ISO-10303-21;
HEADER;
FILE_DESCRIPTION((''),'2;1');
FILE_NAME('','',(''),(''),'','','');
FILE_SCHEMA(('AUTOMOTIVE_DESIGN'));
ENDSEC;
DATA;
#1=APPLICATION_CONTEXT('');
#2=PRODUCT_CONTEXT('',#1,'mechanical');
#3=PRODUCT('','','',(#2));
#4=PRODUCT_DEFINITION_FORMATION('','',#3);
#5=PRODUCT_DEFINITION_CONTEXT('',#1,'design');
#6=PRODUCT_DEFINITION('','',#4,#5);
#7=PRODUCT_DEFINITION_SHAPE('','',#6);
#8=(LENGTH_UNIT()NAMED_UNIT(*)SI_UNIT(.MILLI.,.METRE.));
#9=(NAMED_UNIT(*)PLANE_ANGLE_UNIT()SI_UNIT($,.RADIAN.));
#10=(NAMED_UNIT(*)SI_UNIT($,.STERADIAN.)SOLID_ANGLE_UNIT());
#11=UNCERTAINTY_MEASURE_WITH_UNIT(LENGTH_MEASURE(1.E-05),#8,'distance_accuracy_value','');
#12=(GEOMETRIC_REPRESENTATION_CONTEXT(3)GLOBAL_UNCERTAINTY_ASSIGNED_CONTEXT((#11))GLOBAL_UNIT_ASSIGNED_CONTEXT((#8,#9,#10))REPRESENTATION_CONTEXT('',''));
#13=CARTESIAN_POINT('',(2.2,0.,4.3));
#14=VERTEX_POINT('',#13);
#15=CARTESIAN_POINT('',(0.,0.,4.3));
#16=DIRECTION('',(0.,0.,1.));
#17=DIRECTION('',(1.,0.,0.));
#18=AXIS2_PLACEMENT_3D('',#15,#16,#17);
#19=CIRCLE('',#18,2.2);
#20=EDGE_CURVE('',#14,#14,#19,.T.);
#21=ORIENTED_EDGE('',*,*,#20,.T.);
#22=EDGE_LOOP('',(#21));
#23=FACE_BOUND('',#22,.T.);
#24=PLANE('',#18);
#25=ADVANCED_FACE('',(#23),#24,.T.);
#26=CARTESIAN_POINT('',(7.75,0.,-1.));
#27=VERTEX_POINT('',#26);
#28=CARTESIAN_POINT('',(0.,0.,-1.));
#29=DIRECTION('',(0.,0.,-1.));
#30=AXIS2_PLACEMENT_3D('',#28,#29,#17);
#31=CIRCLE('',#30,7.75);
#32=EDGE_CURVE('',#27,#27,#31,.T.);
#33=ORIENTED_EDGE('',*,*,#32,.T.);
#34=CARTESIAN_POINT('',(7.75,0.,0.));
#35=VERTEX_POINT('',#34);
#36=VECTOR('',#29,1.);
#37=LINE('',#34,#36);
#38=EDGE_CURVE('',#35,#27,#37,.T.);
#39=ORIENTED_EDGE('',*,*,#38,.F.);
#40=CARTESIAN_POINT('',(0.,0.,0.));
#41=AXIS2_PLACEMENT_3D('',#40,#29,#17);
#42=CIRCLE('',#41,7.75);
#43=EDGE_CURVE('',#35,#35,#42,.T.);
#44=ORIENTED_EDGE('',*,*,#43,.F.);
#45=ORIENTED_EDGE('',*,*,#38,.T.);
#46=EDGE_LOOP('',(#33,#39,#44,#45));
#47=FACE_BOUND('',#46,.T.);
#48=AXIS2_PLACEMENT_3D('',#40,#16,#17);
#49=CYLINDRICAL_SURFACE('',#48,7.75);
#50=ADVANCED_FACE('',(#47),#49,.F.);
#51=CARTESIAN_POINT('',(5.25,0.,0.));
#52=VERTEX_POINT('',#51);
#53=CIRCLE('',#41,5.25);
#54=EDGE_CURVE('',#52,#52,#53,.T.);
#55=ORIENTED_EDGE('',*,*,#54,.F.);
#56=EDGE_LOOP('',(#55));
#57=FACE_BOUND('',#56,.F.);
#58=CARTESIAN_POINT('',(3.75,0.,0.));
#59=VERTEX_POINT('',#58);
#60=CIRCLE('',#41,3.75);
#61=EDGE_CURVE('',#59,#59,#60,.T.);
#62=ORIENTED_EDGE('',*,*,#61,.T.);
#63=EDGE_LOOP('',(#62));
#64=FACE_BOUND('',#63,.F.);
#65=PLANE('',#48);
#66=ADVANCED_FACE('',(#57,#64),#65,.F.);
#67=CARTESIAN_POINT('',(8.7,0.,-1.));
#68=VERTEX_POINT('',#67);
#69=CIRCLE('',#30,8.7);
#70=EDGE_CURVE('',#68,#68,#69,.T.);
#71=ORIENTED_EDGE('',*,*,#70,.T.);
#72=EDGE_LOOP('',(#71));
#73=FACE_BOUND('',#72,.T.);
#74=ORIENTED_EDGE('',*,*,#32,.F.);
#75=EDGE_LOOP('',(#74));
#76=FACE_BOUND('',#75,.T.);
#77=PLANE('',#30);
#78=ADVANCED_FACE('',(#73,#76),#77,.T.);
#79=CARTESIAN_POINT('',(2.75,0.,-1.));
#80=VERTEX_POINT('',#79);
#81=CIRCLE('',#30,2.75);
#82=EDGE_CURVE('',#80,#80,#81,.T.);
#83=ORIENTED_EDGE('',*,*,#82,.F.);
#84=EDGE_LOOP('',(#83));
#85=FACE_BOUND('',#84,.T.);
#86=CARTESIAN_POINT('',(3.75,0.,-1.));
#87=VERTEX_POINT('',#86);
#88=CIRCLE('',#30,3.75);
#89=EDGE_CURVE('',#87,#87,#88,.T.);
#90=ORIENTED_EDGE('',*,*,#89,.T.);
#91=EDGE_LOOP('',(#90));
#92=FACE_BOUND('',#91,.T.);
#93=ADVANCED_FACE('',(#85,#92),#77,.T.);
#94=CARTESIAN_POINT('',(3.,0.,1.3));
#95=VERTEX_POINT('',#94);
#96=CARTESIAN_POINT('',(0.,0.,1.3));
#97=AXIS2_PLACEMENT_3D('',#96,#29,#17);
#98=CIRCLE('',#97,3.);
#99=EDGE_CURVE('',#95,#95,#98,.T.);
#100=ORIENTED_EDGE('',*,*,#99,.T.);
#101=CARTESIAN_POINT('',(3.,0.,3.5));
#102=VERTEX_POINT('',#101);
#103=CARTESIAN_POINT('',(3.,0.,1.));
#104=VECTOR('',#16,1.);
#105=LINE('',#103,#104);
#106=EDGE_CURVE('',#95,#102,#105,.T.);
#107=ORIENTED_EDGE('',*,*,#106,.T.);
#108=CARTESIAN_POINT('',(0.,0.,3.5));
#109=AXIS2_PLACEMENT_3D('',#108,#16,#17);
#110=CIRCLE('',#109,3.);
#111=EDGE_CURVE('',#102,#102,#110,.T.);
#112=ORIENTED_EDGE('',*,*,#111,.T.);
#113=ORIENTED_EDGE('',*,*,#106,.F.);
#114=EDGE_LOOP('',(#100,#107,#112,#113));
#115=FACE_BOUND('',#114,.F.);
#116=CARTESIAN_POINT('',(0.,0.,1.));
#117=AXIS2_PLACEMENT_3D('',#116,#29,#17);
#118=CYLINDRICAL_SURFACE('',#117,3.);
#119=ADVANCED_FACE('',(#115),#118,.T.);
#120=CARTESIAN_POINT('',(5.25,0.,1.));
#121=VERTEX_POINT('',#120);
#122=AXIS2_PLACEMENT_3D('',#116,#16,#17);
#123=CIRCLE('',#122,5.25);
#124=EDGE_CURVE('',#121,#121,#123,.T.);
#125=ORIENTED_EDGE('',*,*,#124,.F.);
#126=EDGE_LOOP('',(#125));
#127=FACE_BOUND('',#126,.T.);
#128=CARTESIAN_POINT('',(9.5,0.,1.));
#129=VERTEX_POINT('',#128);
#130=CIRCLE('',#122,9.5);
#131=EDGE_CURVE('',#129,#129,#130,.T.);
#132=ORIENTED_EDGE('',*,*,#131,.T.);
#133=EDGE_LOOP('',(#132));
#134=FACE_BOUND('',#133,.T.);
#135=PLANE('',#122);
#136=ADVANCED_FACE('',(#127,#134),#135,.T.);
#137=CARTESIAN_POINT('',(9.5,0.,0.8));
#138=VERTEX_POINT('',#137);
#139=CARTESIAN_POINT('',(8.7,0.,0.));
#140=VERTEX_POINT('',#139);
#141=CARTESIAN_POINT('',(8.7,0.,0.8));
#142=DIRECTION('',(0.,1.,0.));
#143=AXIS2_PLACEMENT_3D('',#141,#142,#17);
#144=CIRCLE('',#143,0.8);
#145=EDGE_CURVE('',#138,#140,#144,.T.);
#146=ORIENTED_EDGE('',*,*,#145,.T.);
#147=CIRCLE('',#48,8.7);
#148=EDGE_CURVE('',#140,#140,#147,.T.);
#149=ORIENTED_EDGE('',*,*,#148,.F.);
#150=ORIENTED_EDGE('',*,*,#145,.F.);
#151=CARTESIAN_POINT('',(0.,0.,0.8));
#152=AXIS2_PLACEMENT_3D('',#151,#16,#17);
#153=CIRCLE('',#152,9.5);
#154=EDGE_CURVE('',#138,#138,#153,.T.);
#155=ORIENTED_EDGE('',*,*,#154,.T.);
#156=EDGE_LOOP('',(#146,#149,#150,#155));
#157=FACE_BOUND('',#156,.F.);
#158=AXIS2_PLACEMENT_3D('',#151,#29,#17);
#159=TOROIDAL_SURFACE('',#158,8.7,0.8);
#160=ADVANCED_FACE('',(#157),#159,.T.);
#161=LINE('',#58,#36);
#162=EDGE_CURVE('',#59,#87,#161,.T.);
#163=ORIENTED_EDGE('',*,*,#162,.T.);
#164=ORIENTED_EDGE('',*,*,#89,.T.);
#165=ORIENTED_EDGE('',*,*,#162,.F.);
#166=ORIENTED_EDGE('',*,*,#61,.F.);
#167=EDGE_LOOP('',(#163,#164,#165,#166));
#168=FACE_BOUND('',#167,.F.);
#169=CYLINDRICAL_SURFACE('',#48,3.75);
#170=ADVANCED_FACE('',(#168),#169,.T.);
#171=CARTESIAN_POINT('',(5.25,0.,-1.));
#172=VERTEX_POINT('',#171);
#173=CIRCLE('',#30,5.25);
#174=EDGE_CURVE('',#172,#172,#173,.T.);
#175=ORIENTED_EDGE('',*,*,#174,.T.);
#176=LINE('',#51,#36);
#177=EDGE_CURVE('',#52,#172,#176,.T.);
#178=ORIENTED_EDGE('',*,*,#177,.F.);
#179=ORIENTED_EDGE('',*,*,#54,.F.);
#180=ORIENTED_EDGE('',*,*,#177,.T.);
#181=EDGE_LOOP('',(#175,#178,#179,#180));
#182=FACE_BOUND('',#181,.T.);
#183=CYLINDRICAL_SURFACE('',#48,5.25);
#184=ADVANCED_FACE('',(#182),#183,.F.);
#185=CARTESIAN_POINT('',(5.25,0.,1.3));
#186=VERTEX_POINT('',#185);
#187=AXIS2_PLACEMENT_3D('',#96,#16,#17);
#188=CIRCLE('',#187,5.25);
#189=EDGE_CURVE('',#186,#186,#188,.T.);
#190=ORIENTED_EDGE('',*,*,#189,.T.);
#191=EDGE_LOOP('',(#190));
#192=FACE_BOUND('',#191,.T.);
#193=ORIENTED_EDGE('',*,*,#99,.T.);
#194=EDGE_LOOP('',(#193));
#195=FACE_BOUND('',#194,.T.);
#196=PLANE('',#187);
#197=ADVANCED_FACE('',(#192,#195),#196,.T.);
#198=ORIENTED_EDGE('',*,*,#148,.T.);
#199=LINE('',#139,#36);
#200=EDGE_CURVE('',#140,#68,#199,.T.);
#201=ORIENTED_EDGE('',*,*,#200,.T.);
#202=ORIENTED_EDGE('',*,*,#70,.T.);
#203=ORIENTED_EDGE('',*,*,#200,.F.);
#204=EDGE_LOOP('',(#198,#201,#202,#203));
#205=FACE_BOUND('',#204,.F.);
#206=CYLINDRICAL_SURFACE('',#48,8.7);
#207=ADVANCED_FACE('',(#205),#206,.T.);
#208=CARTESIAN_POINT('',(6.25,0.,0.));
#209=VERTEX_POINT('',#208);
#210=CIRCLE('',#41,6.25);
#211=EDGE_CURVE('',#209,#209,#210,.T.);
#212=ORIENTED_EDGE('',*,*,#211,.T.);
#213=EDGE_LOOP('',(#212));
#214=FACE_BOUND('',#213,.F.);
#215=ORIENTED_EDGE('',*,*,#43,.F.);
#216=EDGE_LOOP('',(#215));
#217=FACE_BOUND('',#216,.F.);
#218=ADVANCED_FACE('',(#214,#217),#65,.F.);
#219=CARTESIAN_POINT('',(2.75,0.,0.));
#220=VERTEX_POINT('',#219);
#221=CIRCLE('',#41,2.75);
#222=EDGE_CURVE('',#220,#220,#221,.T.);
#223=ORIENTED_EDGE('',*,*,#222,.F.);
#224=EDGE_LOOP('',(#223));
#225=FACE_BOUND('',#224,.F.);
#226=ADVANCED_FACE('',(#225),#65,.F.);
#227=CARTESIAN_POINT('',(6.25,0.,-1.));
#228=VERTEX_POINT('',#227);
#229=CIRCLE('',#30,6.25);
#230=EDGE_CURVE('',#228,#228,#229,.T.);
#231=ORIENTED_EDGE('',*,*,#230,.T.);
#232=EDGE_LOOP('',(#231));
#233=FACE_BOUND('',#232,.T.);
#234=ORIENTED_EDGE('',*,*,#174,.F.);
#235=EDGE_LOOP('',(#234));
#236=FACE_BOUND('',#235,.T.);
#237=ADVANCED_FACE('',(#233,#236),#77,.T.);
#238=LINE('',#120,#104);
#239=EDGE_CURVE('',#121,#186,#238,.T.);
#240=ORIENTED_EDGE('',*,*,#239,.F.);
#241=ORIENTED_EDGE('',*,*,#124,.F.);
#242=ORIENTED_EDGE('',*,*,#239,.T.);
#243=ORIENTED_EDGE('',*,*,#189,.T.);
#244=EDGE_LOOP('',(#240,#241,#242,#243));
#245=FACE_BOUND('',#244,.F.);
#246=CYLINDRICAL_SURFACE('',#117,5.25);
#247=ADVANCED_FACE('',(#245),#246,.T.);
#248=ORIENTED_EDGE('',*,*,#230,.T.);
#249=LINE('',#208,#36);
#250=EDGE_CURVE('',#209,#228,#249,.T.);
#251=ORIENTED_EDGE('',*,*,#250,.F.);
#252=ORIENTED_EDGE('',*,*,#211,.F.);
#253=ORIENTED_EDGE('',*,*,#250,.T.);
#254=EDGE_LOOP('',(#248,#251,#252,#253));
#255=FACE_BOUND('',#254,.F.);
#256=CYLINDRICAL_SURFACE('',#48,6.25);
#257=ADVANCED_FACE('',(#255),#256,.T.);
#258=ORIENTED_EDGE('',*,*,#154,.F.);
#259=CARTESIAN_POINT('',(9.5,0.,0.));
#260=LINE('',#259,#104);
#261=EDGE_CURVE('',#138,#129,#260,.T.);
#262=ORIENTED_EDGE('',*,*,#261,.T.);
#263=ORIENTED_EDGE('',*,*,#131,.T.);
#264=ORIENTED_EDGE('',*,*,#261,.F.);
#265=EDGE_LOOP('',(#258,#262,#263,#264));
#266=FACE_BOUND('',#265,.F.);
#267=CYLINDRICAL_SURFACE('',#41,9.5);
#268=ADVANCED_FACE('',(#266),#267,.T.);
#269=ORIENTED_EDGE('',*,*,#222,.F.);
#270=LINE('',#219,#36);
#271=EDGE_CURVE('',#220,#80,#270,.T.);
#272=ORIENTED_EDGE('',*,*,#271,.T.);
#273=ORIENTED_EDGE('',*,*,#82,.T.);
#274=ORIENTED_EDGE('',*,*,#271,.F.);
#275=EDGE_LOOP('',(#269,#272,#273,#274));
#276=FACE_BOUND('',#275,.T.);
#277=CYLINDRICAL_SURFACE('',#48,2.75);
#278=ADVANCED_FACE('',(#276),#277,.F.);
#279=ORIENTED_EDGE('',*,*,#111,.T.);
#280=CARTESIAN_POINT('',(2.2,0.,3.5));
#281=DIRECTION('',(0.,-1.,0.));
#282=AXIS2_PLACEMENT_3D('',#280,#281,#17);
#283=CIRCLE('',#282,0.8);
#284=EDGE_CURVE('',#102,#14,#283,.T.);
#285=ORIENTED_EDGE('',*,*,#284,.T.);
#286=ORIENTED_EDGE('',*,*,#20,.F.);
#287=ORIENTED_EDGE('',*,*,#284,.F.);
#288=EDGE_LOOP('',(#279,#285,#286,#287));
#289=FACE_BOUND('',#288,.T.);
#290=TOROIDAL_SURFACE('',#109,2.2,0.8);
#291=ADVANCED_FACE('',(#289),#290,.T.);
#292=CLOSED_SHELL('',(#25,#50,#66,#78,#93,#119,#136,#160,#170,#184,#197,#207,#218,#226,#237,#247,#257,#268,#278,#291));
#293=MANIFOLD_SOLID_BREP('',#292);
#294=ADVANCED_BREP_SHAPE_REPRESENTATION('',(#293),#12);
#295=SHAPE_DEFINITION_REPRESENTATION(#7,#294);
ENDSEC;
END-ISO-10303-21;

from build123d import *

# Parameters (mm, degrees)
F0_R     = 9.5
F1_DEPTH = 1
F2_R     = 3
F3_DEPTH = 3.3
F4_R     = 0.8
F5_R     = 5.25
F5_R_2   = 3
F6_DEPTH = 0.3
F7_R     = 8.7
F7_R_2   = 7.75
F7_R_3   = 6.25
F7_R_4   = 5.25
F7_R_5   = 3.75
F7_R_6   = 2.75
F8_DEPTH = 1


# Not quite as in the source:
# - a feature names something its author has since deleted; it is built from what else it names


with BuildPart() as f1:
    # F0 (on Top) → F1 (new body)
    with BuildSketch(Plane.XY):
        Circle(F0_R)
    extrude(amount=F1_DEPTH)

    # F2 (on face) → F3 (join)
    with BuildSketch(Plane.XY.offset(1)):
        Circle(F2_R)
    extrude(amount=F3_DEPTH)

    # F4
    f4_edges = [f1.edges().sort_by_distance(p)[0] for p in [
        (-9.5, 0, 0),
        (-3, 0, 4.3),
    ]]
    fillet(f4_edges, radius=F4_R)

    # F5 (on face) → F6 (join)
    with BuildSketch(Plane.XY.offset(1)):
        Circle(F5_R)
        Circle(F5_R_2, mode=Mode.SUBTRACT)
        Circle(F5_R_2)
    extrude(amount=F6_DEPTH)

    # F7 (on face) → F8 (join)
    with BuildSketch(Plane(origin=(0, 0, 0), x_dir=(1, 0, 0), z_dir=(0, 0, -1))):
        Circle(F7_R)
        Circle(F7_R_2, mode=Mode.SUBTRACT)
        Circle(F7_R_3)
        Circle(F7_R_4, mode=Mode.SUBTRACT)
        Circle(F7_R_5)
        Circle(F7_R_6, mode=Mode.SUBTRACT)
    extrude(amount=F8_DEPTH)


solid = f1.part
